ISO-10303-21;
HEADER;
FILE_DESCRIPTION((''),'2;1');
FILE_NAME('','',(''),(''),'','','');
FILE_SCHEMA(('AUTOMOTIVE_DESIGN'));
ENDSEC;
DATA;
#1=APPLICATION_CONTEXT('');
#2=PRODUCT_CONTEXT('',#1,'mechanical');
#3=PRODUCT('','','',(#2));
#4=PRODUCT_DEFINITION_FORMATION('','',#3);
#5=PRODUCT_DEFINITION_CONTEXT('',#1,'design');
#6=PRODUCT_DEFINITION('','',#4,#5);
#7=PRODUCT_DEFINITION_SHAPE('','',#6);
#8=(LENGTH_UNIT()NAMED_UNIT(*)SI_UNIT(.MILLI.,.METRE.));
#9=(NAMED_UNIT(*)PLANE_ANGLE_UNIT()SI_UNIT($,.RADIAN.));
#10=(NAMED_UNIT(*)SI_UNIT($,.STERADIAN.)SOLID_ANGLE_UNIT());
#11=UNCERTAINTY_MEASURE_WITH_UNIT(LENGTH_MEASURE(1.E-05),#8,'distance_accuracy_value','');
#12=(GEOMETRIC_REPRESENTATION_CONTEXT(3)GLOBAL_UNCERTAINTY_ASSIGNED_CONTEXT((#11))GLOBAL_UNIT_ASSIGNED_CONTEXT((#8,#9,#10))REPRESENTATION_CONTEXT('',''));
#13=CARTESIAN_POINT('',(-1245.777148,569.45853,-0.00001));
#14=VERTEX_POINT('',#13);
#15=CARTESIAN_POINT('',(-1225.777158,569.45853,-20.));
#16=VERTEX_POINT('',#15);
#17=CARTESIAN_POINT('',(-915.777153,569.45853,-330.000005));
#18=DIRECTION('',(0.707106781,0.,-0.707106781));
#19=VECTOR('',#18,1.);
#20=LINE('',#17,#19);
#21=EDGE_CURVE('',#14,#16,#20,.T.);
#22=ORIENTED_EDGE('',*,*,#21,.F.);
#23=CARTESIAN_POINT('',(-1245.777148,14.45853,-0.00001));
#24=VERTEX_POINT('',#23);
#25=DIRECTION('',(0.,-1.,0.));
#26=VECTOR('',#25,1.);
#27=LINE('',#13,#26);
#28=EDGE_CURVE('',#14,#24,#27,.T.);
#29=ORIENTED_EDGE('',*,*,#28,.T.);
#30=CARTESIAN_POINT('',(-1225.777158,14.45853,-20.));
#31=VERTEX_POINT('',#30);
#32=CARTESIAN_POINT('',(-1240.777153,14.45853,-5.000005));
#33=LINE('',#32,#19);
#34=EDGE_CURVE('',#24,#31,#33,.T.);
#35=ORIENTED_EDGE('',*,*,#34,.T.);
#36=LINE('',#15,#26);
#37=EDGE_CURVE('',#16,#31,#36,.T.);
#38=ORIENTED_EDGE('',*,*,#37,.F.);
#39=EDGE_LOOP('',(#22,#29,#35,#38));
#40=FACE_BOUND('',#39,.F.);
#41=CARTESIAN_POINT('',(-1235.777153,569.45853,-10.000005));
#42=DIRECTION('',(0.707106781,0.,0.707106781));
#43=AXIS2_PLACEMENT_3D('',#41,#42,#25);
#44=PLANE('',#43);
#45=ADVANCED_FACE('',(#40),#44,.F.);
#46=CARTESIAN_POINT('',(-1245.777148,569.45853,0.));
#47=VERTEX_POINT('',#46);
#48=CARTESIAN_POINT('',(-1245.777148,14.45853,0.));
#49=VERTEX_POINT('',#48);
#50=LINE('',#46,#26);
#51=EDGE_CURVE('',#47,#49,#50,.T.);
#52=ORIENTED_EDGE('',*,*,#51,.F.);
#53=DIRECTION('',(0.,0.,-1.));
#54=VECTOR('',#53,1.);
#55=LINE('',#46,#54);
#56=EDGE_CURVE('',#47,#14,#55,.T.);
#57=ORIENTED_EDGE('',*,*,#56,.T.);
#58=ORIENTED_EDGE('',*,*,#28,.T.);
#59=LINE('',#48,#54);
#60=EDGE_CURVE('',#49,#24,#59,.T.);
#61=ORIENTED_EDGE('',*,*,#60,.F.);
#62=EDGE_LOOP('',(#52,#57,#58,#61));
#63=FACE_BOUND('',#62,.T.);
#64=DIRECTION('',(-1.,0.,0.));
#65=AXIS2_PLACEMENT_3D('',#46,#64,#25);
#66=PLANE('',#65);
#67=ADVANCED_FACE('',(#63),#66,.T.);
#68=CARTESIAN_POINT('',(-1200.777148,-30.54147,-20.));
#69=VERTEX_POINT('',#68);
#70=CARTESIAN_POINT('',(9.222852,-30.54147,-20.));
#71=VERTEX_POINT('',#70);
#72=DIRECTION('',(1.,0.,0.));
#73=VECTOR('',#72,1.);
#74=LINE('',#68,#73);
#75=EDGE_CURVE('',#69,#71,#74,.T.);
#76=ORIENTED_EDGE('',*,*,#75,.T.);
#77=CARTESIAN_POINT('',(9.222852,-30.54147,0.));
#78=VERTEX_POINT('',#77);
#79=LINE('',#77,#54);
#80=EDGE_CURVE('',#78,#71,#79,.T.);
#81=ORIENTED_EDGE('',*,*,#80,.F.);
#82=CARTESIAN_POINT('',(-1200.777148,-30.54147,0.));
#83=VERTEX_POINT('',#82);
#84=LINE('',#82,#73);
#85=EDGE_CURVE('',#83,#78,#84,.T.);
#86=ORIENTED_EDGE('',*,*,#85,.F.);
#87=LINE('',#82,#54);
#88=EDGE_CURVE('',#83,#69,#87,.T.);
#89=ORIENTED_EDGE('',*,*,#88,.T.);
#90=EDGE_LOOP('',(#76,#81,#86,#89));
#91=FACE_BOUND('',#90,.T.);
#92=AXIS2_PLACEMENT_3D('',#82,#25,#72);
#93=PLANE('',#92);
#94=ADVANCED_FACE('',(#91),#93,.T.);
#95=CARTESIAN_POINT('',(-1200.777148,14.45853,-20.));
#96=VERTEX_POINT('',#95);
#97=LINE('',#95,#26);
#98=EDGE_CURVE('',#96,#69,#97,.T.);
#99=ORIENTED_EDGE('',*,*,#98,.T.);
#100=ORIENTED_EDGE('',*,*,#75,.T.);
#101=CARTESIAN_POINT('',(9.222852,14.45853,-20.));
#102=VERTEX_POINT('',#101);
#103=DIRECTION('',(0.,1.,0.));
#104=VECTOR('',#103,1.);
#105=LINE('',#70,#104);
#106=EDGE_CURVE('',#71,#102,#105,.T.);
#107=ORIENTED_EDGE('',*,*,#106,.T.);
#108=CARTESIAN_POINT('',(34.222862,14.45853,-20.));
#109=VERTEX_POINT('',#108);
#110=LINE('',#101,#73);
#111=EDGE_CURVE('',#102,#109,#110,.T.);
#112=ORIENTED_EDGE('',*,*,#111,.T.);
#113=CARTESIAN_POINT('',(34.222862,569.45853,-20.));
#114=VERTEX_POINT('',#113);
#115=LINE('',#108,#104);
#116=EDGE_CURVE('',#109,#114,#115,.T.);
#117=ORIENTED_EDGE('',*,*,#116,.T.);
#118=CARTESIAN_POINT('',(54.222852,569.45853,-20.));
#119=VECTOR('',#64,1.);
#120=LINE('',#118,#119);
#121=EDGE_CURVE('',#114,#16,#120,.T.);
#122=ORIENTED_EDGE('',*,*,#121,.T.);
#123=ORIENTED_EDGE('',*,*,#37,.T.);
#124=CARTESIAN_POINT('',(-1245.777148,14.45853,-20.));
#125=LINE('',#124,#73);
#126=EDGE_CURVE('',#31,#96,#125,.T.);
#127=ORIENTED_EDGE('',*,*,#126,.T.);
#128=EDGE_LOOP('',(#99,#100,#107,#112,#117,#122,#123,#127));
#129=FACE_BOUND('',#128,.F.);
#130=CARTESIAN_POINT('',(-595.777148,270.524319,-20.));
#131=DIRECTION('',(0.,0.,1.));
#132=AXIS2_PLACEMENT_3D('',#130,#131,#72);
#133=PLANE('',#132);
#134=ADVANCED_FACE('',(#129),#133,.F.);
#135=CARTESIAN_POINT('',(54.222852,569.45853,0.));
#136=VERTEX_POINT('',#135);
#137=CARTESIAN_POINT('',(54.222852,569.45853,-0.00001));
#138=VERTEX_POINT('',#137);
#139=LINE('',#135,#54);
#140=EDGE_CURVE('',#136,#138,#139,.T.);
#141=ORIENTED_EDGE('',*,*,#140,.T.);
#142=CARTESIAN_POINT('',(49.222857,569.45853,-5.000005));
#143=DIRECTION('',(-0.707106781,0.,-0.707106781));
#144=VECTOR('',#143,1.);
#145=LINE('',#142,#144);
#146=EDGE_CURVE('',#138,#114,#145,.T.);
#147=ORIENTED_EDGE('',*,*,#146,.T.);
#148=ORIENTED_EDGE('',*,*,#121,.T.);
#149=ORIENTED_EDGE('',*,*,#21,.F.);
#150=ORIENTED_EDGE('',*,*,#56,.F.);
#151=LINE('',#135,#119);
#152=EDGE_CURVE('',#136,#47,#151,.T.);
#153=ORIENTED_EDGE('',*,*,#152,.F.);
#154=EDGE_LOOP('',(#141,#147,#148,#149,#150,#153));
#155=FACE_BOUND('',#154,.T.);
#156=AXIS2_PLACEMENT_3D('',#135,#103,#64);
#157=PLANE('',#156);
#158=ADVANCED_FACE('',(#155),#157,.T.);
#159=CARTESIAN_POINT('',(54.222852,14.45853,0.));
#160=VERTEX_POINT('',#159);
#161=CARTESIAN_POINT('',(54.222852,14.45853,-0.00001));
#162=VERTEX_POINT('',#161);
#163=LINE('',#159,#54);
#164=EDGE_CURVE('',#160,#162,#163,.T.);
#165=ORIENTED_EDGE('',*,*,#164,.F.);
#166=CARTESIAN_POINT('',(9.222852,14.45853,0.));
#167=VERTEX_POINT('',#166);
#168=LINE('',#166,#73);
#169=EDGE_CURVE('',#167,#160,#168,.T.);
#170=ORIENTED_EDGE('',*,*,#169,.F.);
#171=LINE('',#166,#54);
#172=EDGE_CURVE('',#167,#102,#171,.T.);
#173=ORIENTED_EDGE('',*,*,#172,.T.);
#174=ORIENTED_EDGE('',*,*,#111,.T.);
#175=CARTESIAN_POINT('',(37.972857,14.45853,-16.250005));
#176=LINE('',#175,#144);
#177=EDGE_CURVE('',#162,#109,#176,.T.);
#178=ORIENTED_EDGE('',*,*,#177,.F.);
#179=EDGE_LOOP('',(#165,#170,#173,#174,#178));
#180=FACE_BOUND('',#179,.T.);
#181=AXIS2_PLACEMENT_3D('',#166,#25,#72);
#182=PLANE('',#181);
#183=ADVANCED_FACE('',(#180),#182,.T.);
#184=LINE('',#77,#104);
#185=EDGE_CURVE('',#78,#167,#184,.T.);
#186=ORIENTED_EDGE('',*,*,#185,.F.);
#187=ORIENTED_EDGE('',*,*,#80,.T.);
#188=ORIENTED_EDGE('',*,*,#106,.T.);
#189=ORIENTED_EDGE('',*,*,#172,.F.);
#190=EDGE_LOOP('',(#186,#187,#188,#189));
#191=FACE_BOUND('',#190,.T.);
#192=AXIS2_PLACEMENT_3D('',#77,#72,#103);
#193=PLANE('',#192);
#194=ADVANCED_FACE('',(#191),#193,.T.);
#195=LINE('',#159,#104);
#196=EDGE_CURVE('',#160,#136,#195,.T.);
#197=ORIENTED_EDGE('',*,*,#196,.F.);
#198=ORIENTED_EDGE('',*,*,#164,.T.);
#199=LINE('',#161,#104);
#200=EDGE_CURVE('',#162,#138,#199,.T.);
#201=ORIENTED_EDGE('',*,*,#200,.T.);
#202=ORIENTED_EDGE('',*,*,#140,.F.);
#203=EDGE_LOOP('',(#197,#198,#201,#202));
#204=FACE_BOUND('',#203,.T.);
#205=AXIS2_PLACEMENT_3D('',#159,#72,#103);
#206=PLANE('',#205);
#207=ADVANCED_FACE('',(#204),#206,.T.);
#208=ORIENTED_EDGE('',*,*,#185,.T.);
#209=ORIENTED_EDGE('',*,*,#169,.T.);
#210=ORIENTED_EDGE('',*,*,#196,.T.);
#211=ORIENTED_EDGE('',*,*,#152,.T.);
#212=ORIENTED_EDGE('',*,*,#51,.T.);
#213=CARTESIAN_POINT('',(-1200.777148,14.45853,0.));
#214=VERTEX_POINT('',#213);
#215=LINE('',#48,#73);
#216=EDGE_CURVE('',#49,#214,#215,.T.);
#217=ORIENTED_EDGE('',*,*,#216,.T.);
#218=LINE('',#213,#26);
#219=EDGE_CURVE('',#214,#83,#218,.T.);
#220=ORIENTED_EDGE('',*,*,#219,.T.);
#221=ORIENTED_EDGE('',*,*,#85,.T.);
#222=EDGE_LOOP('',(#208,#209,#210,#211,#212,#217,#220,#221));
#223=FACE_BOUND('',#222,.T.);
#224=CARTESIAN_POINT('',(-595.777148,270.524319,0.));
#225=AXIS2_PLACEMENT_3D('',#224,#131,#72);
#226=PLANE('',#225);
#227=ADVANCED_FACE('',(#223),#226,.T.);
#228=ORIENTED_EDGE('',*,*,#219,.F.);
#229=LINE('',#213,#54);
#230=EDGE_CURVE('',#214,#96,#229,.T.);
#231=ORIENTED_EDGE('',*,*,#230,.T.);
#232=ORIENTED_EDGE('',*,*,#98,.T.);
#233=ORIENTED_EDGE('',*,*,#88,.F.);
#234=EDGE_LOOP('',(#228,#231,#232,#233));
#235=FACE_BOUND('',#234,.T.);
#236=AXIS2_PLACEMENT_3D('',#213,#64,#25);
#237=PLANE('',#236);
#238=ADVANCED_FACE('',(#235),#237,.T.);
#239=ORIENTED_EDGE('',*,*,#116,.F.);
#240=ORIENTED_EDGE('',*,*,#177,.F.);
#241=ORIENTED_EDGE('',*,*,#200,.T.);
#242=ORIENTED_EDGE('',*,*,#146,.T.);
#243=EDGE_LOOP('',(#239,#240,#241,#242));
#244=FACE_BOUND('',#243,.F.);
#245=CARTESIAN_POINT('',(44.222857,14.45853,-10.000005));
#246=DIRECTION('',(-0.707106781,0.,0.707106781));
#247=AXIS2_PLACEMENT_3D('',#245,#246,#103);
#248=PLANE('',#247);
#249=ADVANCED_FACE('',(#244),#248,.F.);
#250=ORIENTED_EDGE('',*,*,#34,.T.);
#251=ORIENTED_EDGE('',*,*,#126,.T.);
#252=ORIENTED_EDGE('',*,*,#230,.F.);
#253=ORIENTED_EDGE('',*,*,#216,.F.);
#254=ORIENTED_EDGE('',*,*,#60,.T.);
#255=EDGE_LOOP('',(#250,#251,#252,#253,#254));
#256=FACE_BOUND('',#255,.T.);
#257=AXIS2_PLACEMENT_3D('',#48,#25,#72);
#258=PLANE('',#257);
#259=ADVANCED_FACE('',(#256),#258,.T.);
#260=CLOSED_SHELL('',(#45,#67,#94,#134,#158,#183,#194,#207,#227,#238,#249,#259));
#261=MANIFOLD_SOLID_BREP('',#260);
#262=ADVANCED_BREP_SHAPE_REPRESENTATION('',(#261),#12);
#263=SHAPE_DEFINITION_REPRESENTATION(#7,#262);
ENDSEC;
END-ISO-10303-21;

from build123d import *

# Parameters (mm, degrees)
F1_DEPTH = 20
F2_SIZE  = 19.99999


# Not quite as in the source:
# - a fillet or chamfer is up to 0.001 mm smaller than in the source, because OpenCascade refuses the exact size


with BuildPart() as f1:
    # F0 (on Top) → F1 (new body)
    with BuildSketch(Plane.XY):
        Polygon((54.2228519917, 569.4585297257), (-1245.7771480083, 569.4585297257), (-1245.7771480083, 14.4585297257), (-1200.7771480083, 14.4585297257), (-1200.7771480083, -30.5414702743), (9.2228519917, -30.5414702743), (9.2228519917, 14.4585297257), (54.2228519917, 14.4585297257), align=None)
    extrude(amount=-F1_DEPTH)

    # F2 (size 20 in the source; OpenCascade refuses exactly that, so slightly less here)
    f2_edges = [f1.edges().sort_by_distance(p)[0] for p in [
        (-1245.777148, 291.95853, -20),
        (54.222852, 291.95853, -20),
    ]]
    chamfer(f2_edges, length=F2_SIZE)


solid = f1.part
